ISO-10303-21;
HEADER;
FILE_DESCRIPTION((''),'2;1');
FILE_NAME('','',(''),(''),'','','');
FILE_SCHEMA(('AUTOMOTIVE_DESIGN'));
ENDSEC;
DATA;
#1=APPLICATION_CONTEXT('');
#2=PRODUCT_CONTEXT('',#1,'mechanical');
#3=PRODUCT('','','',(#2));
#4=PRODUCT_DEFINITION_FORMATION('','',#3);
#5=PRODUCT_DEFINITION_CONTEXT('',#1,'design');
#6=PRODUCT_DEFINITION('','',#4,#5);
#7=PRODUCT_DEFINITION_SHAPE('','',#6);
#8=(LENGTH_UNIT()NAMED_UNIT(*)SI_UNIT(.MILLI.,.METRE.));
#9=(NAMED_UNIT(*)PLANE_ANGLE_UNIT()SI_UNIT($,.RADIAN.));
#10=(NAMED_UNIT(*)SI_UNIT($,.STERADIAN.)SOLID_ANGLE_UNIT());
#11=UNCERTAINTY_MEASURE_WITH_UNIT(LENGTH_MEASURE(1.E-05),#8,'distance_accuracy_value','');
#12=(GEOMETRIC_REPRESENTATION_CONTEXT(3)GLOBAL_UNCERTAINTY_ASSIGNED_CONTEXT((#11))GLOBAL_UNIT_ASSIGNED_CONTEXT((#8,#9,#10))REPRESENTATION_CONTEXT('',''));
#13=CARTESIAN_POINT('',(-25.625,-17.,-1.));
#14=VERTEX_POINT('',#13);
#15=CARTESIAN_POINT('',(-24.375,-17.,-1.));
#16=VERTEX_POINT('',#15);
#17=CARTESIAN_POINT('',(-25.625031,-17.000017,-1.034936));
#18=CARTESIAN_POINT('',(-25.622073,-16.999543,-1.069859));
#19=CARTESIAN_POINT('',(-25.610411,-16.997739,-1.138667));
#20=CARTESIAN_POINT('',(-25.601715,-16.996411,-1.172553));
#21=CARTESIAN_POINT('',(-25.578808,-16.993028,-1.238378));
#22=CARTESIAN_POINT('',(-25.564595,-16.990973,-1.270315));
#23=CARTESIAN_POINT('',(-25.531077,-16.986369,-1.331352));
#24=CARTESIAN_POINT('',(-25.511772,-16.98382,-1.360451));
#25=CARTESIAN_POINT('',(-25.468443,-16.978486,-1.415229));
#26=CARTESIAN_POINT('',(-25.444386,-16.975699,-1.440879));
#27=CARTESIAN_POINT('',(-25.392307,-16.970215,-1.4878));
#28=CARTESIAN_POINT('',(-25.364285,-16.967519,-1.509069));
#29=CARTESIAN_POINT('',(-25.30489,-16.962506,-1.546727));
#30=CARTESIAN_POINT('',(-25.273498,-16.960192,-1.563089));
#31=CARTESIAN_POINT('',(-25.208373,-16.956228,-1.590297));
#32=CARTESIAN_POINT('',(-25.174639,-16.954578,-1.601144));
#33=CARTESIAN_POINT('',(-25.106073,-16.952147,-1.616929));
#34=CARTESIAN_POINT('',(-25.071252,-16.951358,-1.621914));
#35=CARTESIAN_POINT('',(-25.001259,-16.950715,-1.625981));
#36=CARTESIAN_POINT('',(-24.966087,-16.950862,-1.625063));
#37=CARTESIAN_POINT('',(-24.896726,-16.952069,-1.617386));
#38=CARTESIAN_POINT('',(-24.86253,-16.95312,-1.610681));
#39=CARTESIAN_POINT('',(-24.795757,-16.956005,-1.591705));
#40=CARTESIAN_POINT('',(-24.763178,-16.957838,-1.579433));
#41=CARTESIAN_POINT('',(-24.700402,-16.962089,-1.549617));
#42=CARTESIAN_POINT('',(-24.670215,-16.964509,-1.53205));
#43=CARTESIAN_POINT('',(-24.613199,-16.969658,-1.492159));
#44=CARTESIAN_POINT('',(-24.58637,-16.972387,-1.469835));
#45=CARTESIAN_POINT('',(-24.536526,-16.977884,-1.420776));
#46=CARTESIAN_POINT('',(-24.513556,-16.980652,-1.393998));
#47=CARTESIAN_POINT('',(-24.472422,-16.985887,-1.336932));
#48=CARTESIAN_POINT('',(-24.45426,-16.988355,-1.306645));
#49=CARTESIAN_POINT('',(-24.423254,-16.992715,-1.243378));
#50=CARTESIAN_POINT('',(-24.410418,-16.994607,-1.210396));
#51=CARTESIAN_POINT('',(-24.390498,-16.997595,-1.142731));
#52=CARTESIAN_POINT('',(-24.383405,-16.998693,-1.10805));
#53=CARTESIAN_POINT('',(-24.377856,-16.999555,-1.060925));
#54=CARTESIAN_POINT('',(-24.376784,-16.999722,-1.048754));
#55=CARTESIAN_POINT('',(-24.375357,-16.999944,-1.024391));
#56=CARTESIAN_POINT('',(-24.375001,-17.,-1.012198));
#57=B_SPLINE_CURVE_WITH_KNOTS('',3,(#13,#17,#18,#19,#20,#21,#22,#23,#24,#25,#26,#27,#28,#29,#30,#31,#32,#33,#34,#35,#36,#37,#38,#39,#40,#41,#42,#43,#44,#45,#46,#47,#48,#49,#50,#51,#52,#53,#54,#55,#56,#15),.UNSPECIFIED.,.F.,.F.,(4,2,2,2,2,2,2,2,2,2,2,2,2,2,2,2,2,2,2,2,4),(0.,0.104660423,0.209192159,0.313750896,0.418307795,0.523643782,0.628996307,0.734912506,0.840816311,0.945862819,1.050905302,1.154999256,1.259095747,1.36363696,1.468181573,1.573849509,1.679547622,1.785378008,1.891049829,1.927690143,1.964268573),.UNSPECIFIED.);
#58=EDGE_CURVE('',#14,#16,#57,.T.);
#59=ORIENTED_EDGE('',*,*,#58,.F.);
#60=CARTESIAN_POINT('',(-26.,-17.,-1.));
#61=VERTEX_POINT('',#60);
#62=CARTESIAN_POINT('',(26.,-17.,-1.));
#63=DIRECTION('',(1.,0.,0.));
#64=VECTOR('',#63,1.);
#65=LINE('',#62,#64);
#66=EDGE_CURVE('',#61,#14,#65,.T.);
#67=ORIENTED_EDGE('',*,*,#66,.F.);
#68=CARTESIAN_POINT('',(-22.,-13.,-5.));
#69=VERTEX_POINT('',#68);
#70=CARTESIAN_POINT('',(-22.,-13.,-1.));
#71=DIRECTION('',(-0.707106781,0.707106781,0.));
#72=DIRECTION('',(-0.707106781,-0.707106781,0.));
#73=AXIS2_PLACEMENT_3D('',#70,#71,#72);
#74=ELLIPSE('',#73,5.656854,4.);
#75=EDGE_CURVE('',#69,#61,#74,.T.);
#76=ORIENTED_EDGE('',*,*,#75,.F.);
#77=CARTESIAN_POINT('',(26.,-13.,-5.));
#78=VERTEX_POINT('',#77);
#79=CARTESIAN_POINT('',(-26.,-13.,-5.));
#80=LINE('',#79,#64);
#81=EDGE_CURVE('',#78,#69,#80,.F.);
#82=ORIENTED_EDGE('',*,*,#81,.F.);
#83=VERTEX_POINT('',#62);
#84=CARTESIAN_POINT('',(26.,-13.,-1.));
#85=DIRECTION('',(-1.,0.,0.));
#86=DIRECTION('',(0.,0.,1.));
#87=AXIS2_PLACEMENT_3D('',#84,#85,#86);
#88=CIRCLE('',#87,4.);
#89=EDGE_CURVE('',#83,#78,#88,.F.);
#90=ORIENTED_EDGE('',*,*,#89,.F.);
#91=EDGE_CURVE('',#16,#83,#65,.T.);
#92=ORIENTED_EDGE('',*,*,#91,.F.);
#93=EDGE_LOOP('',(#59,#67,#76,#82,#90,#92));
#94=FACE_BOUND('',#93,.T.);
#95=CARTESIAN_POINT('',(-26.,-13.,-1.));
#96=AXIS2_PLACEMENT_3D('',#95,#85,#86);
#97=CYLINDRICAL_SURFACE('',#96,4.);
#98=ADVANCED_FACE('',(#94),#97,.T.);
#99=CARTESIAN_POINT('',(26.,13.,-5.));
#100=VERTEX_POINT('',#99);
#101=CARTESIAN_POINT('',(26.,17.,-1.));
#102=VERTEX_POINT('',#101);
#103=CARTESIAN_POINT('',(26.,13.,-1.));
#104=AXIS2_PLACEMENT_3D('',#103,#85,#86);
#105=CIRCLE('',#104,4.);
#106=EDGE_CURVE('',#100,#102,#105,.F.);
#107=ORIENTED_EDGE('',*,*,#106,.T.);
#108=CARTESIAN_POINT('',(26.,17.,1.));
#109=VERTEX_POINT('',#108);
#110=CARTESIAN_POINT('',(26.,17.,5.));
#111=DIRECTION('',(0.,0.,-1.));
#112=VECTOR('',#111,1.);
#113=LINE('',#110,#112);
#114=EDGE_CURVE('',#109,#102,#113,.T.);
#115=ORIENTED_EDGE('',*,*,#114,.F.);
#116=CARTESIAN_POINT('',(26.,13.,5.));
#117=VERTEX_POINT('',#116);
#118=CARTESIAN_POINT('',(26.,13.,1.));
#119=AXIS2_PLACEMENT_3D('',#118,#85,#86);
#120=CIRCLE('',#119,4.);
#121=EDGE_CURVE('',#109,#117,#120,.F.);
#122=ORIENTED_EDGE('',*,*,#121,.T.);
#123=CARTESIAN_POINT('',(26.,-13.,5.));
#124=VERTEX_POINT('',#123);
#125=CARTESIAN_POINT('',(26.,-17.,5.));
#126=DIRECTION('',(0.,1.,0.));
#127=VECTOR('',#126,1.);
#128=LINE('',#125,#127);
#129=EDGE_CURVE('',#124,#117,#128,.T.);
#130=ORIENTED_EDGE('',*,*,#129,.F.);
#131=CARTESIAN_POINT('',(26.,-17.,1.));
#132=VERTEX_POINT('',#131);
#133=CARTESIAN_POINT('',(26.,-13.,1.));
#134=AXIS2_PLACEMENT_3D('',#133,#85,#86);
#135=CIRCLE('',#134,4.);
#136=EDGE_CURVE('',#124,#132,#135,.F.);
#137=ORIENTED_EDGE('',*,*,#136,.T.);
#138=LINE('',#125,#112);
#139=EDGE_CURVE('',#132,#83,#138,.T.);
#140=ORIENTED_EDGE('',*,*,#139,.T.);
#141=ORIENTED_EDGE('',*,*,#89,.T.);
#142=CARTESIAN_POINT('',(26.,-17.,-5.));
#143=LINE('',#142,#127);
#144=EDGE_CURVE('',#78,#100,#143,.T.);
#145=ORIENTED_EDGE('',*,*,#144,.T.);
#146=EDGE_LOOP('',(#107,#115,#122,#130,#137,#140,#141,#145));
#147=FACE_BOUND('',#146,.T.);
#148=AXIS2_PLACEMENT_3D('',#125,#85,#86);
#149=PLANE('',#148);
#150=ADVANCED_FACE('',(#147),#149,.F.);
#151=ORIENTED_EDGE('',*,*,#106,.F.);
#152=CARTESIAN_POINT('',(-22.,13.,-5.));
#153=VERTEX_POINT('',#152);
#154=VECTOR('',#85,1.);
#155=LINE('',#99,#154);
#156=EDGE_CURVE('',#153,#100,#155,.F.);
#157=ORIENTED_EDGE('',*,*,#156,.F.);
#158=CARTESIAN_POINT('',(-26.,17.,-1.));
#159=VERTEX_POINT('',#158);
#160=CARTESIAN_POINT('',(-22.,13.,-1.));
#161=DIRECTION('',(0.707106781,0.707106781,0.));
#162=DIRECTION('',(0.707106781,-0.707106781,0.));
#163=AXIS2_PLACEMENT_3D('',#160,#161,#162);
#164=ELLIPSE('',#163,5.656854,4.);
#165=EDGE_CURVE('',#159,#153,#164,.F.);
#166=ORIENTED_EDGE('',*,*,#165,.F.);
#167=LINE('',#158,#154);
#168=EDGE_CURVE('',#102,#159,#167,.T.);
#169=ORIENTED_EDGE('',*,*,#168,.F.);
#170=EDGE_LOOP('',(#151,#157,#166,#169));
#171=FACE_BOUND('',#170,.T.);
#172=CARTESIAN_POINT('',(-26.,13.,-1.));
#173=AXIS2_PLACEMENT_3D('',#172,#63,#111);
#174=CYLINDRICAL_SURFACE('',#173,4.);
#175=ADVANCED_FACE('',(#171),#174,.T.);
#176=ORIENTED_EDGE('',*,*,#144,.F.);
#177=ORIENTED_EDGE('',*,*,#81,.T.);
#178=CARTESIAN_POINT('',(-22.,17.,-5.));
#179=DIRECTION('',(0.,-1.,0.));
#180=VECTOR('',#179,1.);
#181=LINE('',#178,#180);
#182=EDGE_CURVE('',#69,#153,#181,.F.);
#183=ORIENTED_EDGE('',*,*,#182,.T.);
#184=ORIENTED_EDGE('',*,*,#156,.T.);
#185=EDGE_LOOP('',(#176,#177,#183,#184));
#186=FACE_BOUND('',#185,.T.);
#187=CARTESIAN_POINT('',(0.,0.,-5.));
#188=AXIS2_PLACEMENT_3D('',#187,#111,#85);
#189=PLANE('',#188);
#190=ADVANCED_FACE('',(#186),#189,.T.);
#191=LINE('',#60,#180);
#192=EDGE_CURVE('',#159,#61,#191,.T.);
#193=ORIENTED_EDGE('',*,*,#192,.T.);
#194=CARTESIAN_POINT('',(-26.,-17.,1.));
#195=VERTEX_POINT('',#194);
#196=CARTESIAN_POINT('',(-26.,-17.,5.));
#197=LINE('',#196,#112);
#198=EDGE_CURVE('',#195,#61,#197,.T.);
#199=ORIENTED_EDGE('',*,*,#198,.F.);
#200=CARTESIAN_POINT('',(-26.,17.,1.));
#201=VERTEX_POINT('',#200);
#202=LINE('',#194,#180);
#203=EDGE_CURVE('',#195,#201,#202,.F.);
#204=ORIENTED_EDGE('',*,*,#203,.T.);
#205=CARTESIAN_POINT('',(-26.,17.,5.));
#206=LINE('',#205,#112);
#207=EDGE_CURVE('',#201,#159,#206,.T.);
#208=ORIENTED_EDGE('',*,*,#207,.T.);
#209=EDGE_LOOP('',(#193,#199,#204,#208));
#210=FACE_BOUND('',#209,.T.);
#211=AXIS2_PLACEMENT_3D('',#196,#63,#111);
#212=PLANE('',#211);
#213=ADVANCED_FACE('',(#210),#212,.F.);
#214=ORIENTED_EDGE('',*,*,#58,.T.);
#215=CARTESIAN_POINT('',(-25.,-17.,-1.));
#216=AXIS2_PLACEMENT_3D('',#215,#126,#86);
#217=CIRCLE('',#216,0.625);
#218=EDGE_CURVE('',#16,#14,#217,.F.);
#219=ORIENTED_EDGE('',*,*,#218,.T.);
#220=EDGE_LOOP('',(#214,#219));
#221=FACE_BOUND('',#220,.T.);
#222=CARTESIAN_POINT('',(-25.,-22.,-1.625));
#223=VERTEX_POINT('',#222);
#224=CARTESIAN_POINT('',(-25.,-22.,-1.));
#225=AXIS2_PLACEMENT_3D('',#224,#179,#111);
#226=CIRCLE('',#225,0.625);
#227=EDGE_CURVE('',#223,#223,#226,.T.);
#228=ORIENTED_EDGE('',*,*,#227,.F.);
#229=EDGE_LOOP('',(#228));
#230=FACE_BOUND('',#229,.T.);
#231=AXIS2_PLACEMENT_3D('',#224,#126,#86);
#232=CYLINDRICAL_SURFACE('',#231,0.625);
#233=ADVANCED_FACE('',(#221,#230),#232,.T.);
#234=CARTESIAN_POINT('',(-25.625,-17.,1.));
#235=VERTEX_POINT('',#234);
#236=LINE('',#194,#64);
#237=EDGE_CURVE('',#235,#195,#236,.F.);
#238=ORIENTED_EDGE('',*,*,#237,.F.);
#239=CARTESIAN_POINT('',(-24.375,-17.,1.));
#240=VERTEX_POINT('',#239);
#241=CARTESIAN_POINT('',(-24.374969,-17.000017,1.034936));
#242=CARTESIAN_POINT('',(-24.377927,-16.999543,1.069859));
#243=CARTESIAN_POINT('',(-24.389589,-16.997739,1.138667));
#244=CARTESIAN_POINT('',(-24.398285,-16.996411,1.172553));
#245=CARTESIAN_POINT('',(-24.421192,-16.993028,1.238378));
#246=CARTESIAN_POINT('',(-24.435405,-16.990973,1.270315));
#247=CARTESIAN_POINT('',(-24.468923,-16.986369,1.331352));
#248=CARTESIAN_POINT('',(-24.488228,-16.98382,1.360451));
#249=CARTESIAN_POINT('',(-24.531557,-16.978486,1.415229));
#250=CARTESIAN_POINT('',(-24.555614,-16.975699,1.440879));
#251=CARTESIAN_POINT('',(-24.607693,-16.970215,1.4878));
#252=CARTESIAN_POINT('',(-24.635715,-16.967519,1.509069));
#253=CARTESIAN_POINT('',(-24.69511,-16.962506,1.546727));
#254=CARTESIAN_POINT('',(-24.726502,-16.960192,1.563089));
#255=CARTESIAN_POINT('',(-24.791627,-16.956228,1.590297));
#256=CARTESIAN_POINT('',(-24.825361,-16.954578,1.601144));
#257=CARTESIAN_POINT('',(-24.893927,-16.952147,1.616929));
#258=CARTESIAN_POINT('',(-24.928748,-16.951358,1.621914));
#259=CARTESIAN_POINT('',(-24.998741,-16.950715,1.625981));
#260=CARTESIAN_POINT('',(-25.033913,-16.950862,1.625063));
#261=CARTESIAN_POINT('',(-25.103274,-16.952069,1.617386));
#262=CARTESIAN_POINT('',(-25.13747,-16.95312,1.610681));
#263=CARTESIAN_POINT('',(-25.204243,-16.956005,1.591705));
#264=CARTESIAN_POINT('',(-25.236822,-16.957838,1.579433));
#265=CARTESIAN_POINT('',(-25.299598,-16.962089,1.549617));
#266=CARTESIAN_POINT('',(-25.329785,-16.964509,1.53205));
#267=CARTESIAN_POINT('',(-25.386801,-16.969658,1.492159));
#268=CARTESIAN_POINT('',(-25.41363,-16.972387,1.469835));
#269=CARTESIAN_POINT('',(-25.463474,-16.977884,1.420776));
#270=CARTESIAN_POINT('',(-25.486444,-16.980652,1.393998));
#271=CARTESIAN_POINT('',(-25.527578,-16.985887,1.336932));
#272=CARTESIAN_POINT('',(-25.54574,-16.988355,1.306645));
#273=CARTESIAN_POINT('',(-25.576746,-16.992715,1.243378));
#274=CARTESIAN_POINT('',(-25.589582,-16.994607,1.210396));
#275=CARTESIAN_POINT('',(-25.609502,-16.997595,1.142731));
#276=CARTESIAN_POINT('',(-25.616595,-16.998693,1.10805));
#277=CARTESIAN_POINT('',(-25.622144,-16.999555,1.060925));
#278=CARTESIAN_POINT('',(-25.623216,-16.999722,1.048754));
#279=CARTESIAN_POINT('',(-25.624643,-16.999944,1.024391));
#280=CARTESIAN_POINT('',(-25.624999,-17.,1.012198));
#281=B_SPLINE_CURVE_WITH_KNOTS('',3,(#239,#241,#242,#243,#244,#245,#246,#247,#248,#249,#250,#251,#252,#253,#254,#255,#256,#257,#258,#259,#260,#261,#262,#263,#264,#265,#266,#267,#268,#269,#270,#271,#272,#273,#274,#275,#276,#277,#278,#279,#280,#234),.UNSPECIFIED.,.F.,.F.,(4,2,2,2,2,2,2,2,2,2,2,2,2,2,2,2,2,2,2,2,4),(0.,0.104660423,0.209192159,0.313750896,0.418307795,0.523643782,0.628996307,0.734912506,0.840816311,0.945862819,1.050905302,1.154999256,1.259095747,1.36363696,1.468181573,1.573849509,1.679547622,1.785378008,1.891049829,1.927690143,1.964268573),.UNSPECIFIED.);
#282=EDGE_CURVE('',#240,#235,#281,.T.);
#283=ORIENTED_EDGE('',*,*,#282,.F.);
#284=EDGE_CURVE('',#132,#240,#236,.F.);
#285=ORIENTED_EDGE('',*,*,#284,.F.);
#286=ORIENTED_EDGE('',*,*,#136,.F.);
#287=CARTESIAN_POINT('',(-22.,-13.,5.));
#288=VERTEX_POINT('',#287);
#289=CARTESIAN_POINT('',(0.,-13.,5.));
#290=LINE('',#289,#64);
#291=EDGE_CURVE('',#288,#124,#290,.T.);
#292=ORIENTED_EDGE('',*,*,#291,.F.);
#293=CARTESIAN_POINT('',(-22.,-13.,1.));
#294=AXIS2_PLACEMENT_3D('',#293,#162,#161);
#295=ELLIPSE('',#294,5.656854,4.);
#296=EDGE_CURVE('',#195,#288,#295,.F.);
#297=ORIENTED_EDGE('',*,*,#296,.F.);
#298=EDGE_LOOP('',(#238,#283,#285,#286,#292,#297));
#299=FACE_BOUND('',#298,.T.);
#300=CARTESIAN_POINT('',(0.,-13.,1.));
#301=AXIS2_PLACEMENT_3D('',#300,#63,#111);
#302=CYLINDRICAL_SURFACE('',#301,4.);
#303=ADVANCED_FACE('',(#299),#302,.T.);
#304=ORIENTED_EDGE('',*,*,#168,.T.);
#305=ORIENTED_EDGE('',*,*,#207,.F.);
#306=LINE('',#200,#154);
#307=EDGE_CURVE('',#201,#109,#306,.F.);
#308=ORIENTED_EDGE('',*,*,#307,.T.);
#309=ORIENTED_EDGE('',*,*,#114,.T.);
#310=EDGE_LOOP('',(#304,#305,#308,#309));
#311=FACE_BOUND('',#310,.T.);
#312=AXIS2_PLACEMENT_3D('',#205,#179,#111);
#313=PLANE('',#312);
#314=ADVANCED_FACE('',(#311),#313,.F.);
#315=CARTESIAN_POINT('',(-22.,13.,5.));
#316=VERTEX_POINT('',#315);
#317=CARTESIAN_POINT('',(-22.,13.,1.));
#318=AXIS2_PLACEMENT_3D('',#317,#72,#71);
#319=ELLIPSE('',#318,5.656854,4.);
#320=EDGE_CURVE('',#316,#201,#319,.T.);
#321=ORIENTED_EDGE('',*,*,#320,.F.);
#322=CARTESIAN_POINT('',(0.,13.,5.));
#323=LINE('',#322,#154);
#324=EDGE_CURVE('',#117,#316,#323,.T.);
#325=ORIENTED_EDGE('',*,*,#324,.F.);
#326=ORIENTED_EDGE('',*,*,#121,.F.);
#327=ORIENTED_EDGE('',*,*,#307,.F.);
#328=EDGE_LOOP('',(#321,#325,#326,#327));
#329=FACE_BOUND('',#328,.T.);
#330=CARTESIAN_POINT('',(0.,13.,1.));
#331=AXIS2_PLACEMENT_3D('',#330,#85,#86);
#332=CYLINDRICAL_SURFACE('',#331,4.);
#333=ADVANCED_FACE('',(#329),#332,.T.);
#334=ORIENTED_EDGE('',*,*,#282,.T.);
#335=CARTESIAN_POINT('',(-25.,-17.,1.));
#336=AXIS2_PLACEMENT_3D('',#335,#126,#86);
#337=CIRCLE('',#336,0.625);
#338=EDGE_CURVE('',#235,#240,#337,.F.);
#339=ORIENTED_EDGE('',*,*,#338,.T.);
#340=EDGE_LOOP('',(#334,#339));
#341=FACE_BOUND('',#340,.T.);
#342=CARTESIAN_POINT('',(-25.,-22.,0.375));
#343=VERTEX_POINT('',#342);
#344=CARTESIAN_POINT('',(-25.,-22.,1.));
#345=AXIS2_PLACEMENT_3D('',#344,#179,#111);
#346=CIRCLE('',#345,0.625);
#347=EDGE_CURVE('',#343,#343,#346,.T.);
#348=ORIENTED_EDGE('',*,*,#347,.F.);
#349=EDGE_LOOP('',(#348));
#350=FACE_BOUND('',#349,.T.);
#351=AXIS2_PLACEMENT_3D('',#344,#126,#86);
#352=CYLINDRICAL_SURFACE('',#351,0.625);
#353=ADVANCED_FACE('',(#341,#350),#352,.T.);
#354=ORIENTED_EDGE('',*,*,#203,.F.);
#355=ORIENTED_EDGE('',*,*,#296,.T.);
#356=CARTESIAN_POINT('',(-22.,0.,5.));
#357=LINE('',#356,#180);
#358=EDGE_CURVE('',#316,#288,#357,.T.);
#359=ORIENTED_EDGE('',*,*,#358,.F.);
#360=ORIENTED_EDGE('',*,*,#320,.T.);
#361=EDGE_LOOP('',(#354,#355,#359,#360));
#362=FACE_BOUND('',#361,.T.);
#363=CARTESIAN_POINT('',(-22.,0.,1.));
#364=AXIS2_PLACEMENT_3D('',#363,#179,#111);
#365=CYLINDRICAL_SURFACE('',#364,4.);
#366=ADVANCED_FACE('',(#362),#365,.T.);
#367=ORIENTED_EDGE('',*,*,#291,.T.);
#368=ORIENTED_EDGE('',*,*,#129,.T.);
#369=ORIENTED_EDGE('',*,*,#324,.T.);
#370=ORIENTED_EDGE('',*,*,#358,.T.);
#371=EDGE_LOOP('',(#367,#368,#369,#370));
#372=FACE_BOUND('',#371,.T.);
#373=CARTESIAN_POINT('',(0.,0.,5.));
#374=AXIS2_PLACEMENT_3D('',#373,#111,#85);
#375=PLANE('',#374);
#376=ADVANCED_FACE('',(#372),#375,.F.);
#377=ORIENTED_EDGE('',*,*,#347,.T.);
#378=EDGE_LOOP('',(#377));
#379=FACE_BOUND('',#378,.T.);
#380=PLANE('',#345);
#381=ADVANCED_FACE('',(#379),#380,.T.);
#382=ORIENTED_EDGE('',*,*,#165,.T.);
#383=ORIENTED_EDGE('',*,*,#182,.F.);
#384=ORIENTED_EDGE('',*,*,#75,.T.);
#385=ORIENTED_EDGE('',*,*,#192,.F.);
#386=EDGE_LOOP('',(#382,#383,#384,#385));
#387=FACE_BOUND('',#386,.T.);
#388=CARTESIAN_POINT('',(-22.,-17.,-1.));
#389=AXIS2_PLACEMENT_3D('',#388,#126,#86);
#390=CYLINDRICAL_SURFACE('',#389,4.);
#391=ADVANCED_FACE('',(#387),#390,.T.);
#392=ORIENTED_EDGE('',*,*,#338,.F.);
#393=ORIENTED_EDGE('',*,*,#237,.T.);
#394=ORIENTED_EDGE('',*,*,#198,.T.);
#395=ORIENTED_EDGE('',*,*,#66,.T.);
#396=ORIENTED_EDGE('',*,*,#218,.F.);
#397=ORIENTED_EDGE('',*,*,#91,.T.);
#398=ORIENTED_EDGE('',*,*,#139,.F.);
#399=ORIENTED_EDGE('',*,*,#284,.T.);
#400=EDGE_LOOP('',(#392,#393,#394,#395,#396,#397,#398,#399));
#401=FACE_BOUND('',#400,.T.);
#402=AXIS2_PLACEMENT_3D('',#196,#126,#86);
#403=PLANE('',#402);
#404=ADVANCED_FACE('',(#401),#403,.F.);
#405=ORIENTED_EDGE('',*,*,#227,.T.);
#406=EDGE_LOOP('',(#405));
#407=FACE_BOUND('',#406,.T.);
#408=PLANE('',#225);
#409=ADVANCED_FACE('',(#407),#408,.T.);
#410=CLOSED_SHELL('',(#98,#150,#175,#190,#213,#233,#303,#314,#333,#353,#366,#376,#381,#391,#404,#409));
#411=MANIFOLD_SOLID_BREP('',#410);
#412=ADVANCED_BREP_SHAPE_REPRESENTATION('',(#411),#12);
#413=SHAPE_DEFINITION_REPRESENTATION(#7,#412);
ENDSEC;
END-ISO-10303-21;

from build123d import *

# Parameters (mm, degrees)
SKETCH1_W           = 52
SKETCH1_H           = 34
BOSS_EXTRUDE1_DEPTH = 5
SKETCH2_R           = 0.625
BOSS_EXTRUDE2_DEPTH = 5
FILLET1_R           = 4


with BuildPart() as part:
    # Sketch1 → Boss-Extrude1 (new, symmetric)
    with BuildSketch(Plane.XY):
        Rectangle(SKETCH1_W, SKETCH1_H)
    extrude(amount=BOSS_EXTRUDE1_DEPTH, both=True)

    # Sketch2 → Boss-Extrude2 (add)
    with BuildSketch(Plane.XZ.offset(17)):
        with Locations(Location((-25, 1, 0), (0, 0, 90))):
            Circle(SKETCH2_R)
        with Locations(Location((-25, -1, 0), (0, 0, 90))):
            Circle(SKETCH2_R)
    extrude(amount=BOSS_EXTRUDE2_DEPTH)

    # Fillet1
    # the kernel refuses this fillet: 4 mm, written as the material it takes off along each edge
    with BuildSketch(Plane(origin=(-26, 27, 5), x_dir=(0, 0, -1), z_dir=(0, -1, 0)), Plane(origin=(-26, 27, -5), x_dir=(1, 0, 0), z_dir=(0, -1, 0))) as fillet1_piece_1:
        with BuildLine():
            CenterArc((FILLET1_R, FILLET1_R), FILLET1_R, 180, 90)
            Line((0, FILLET1_R), (0, 0))
            Line((0, 0), (FILLET1_R, 0))
        make_face()
    extrude(amount=54, mode=Mode.SUBTRACT)
    with BuildSketch(Plane(origin=(-36, -17, 5), x_dir=(0, 0, -1), z_dir=(1, 0, 0))) as fillet1_piece_2_section:
        with BuildLine():
            CenterArc((FILLET1_R, FILLET1_R), FILLET1_R, 180, 90)
            Line((0, FILLET1_R), (0, 0))
            Line((0, 0), (FILLET1_R, 0))
        make_face()
    fillet1_piece_2 = extrude(amount=72, mode=Mode.PRIVATE)
    fillet1_piece_2 = fillet1_piece_2 - Plane(origin=(-25, -16.094238655, 1), x_dir=(0, 0, 1), z_dir=(0, 1, 0)) * Cylinder(0.625, 160, mode=Mode.PRIVATE)
    add(fillet1_piece_2, mode=Mode.SUBTRACT)
    with BuildSketch(Plane(origin=(-36, -17, -5), x_dir=(0, 0, 1), z_dir=(1, 0, 0))) as fillet1_piece_3_section:
        with BuildLine():
            CenterArc((FILLET1_R, -FILLET1_R), FILLET1_R, 90, 90)
            Line((0, -FILLET1_R), (0, 0))
            Line((0, 0), (FILLET1_R, 0))
        make_face()
    fillet1_piece_3 = extrude(amount=72, mode=Mode.PRIVATE)
    fillet1_piece_3 = fillet1_piece_3 - Plane(origin=(-25, -16.094238658, -1), x_dir=(0, 0, 1), z_dir=(0, 1, 0)) * Cylinder(0.625, 160, mode=Mode.PRIVATE)
    add(fillet1_piece_3, mode=Mode.SUBTRACT)
    with BuildSketch(Plane(origin=(36, 17, -5), x_dir=(0, -1, 0), z_dir=(-1, 0, 0))) as fillet1_piece_4:
        with BuildLine():
            CenterArc((FILLET1_R, FILLET1_R), FILLET1_R, 180, 90)
            Line((0, FILLET1_R), (0, 0))
            Line((0, 0), (FILLET1_R, 0))
        make_face()
    extrude(amount=72, mode=Mode.SUBTRACT)
    with BuildSketch(Plane(origin=(36, 17, 5), x_dir=(0, -1, 0), z_dir=(-1, 0, 0))) as fillet1_piece_5:
        with BuildLine():
            CenterArc((FILLET1_R, -FILLET1_R), FILLET1_R, 90, 90)
            Line((0, -FILLET1_R), (0, 0))
            Line((0, 0), (FILLET1_R, 0))
        make_face()
    extrude(amount=72, mode=Mode.SUBTRACT)


solid = part.part
